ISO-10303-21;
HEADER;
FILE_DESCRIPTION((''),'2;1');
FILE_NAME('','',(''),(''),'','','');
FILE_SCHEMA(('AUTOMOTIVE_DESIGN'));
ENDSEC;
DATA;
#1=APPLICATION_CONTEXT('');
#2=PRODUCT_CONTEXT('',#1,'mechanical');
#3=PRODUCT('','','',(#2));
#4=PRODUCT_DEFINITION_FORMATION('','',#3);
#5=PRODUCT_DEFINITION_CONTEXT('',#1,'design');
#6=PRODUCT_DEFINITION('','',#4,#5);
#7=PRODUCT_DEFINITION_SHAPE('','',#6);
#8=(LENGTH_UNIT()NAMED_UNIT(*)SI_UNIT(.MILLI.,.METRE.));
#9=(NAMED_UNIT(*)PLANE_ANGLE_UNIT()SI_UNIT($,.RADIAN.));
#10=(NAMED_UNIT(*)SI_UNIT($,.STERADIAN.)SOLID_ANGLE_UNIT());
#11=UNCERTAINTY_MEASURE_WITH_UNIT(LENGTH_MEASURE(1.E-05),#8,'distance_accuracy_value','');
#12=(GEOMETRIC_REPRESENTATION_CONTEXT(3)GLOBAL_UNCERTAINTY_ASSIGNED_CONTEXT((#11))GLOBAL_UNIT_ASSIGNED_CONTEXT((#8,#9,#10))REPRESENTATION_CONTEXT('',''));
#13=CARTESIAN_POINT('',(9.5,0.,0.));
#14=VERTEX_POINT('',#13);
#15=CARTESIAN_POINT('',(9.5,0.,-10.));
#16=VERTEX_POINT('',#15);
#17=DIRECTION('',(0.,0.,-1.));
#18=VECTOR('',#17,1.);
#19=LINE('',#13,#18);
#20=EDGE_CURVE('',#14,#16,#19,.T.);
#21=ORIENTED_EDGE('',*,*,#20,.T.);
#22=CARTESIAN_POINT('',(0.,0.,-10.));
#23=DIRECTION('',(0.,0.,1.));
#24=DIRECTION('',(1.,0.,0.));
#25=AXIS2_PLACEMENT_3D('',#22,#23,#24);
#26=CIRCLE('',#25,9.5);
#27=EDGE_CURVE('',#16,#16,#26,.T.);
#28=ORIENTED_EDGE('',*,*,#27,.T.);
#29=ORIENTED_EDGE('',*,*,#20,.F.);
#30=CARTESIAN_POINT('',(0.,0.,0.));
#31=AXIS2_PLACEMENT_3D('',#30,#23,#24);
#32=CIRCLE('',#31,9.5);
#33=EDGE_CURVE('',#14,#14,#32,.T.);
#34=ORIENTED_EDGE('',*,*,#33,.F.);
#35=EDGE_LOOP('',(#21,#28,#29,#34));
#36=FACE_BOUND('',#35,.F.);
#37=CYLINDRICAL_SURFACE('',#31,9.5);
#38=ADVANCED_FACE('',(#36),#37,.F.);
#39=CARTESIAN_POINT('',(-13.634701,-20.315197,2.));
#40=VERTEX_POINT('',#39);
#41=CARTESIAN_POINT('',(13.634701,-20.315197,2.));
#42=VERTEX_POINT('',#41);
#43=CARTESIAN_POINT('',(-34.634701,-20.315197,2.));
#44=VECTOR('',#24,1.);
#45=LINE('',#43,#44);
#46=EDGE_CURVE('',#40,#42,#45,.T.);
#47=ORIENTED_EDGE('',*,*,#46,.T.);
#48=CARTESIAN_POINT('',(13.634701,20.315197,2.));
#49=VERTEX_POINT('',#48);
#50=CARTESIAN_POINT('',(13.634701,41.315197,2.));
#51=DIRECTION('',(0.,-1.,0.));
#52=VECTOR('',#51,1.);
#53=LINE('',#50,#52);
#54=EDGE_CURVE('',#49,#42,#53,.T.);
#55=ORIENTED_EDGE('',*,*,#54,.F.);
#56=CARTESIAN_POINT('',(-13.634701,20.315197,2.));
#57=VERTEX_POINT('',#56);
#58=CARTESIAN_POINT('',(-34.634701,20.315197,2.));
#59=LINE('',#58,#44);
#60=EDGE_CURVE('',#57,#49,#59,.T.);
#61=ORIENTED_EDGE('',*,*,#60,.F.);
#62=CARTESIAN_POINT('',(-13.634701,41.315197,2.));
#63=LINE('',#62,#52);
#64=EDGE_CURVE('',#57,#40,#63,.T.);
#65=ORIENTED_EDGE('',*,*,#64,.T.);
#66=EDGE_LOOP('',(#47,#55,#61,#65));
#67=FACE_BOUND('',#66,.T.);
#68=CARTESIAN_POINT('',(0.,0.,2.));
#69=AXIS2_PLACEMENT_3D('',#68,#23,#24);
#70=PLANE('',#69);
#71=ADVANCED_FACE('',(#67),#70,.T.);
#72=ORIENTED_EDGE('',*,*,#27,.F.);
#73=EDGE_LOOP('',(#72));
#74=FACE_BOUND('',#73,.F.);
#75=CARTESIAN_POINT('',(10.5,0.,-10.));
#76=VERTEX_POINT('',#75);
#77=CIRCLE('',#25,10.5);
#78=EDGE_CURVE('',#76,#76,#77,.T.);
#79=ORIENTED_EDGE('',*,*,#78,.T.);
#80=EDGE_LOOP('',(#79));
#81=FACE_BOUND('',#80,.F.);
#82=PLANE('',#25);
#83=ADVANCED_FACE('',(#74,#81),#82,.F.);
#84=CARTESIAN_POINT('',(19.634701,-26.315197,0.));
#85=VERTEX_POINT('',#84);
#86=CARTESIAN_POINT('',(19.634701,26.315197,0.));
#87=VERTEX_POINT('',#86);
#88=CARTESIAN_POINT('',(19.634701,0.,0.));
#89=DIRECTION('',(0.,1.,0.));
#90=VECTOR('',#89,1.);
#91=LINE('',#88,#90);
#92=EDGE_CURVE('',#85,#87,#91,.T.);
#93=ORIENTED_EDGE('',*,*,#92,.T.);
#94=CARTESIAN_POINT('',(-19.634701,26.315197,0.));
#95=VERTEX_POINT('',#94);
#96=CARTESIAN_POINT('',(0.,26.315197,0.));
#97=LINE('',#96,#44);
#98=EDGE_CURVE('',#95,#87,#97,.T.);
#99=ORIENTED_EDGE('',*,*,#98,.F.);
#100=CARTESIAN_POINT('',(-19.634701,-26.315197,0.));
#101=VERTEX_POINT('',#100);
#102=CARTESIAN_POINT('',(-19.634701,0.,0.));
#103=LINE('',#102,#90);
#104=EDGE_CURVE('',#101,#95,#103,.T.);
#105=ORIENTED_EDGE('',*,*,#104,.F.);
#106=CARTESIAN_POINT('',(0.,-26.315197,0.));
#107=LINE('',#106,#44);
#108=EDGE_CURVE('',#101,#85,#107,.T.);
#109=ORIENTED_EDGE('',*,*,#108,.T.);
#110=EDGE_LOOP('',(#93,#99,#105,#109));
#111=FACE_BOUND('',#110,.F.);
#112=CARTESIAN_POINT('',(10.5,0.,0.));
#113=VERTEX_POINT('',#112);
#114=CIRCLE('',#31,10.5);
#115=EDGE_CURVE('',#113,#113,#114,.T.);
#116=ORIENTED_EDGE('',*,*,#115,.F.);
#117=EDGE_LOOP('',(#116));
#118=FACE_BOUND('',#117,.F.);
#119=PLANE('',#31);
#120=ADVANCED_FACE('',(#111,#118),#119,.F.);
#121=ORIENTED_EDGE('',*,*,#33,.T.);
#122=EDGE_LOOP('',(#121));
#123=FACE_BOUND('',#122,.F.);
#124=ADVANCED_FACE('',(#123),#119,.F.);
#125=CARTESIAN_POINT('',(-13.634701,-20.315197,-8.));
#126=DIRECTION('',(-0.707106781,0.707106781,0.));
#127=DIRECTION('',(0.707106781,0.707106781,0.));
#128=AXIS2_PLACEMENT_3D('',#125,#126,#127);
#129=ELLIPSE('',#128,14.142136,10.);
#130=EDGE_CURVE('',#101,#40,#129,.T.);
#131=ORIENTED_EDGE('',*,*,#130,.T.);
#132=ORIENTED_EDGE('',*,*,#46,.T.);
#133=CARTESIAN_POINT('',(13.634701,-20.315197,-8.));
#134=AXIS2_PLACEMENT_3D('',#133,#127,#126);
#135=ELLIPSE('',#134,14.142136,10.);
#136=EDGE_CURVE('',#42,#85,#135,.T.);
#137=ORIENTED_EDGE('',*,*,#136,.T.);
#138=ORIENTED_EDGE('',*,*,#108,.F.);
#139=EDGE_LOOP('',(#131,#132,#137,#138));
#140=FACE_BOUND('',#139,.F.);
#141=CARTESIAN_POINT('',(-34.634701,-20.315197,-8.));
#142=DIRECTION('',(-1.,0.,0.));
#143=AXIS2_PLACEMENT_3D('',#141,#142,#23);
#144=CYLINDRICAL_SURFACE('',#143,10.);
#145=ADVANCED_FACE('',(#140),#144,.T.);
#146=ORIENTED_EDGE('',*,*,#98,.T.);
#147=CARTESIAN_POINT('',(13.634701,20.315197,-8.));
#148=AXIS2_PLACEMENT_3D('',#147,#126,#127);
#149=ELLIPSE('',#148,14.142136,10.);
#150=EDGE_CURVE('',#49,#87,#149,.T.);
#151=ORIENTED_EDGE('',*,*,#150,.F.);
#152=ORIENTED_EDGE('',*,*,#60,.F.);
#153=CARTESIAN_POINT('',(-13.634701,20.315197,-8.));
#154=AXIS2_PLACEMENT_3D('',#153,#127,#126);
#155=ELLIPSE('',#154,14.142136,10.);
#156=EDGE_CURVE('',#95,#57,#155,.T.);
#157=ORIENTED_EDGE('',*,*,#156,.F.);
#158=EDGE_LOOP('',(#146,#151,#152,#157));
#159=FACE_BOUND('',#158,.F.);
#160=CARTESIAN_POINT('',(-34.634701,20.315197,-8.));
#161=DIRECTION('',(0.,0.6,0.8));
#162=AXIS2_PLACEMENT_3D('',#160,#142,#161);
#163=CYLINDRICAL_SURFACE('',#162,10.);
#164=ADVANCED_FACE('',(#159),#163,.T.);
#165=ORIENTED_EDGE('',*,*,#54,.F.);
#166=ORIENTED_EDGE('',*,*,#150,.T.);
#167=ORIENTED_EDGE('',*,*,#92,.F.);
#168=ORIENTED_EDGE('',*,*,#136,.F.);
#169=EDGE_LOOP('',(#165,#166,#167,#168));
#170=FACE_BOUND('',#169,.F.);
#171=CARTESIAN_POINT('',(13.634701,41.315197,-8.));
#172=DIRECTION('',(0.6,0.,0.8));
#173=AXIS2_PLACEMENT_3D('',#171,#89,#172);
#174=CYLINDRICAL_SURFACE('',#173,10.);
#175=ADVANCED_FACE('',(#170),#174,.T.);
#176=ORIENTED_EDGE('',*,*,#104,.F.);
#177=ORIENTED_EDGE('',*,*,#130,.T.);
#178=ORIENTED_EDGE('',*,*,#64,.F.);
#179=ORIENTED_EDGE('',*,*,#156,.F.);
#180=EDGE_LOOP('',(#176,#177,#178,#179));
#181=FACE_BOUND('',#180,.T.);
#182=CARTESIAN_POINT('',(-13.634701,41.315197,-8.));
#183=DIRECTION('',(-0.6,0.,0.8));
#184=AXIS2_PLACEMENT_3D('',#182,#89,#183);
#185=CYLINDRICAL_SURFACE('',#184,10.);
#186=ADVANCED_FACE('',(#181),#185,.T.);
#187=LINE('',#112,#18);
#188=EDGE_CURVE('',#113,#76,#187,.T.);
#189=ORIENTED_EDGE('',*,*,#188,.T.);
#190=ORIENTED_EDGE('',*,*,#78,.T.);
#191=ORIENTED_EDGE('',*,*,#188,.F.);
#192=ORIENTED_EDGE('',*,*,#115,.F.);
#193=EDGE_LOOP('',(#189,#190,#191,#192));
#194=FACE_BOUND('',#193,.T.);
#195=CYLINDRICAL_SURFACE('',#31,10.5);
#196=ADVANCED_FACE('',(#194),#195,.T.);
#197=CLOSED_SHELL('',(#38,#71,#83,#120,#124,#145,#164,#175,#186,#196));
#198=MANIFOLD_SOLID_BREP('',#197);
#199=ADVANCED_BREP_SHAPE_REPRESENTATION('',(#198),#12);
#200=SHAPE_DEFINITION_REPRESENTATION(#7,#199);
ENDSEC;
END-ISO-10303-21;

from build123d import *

# Parameters (mm, degrees)
F0_R        = 10.5
F0_R_2      = 9.5
F1_DEPTH    = 10
F2_W        = 39.2694026232
F2_H        = 52.6303946972
F3_DEPTH    = 1
F4_DEPTH    = 1
F5_T1_DEPTH = 82.6303946972
F5_T3_DEPTH = 69.2694026232


# Not quite as in the source:
# - a fillet or chamfer that OpenCascade refuses, or shapes differently, is made with other operations: its cross-section is extruded or revolved along the edge and cut away or added


with BuildPart() as f1:
    # F0 (on Top) → F1 (new body)
    with BuildSketch(Plane.XY):
        Circle(F0_R)
        Circle(F0_R_2, mode=Mode.SUBTRACT)
    extrude(amount=-F1_DEPTH)

    # F2 (on Top) → F3 (join)
    with BuildSketch(Plane.XY):
        Rectangle(F2_W, F2_H)
    extrude(amount=F3_DEPTH)

    # F4 (add): a face of the model
    f4_faces = [f1.faces().sort_by_distance(p)[0] for p in [
        (0, 0, 1),
    ]]
    extrude(f4_faces, amount=F4_DEPTH)

    # F5: fillet of radius 10 on 4 edges, made by hand

    # F5_s2 → F5_t1 (cut)
    with BuildSketch(Plane.XZ.offset(-41.3151973486)):
        with BuildLine():
            ThreePointArc((19.6347013116, 0), (16.7969789718, 1.4868329805), (13.6347013116, 2))
            Line((13.6347013116, 2), (19.6347013116, 2))
            Line((19.6347013116, 2), (19.6347013116, 0))
        make_face()
        with BuildLine():
            ThreePointArc((-19.6347013116, 0), (-16.7969789718, 1.4868329805), (-13.6347013116, 2))
            Line((-13.6347013116, 2), (-19.6347013116, 2))
            Line((-19.6347013116, 2), (-19.6347013116, 0))
        make_face()
    extrude(amount=F5_T1_DEPTH, mode=Mode.SUBTRACT)

    # F5_s4 → F5_t3 (cut)
    with BuildSketch(Plane.YZ.offset(-34.6347013116)):
        with BuildLine():
            ThreePointArc((26.3151973486, 0), (23.4774750088, 1.4868329805), (20.3151973486, 2))
            Line((20.3151973486, 2), (26.3151973486, 2))
            Line((26.3151973486, 2), (26.3151973486, 0))
        make_face()
        with BuildLine():
            ThreePointArc((-20.3151973486, 2), (-23.4774750088, 1.4868329805), (-26.3151973486, 0))
            Line((-26.3151973486, 0), (-26.3151973486, 2))
            Line((-26.3151973486, 2), (-20.3151973486, 2))
        make_face()
    extrude(amount=F5_T3_DEPTH, mode=Mode.SUBTRACT)


solid = f1.part
